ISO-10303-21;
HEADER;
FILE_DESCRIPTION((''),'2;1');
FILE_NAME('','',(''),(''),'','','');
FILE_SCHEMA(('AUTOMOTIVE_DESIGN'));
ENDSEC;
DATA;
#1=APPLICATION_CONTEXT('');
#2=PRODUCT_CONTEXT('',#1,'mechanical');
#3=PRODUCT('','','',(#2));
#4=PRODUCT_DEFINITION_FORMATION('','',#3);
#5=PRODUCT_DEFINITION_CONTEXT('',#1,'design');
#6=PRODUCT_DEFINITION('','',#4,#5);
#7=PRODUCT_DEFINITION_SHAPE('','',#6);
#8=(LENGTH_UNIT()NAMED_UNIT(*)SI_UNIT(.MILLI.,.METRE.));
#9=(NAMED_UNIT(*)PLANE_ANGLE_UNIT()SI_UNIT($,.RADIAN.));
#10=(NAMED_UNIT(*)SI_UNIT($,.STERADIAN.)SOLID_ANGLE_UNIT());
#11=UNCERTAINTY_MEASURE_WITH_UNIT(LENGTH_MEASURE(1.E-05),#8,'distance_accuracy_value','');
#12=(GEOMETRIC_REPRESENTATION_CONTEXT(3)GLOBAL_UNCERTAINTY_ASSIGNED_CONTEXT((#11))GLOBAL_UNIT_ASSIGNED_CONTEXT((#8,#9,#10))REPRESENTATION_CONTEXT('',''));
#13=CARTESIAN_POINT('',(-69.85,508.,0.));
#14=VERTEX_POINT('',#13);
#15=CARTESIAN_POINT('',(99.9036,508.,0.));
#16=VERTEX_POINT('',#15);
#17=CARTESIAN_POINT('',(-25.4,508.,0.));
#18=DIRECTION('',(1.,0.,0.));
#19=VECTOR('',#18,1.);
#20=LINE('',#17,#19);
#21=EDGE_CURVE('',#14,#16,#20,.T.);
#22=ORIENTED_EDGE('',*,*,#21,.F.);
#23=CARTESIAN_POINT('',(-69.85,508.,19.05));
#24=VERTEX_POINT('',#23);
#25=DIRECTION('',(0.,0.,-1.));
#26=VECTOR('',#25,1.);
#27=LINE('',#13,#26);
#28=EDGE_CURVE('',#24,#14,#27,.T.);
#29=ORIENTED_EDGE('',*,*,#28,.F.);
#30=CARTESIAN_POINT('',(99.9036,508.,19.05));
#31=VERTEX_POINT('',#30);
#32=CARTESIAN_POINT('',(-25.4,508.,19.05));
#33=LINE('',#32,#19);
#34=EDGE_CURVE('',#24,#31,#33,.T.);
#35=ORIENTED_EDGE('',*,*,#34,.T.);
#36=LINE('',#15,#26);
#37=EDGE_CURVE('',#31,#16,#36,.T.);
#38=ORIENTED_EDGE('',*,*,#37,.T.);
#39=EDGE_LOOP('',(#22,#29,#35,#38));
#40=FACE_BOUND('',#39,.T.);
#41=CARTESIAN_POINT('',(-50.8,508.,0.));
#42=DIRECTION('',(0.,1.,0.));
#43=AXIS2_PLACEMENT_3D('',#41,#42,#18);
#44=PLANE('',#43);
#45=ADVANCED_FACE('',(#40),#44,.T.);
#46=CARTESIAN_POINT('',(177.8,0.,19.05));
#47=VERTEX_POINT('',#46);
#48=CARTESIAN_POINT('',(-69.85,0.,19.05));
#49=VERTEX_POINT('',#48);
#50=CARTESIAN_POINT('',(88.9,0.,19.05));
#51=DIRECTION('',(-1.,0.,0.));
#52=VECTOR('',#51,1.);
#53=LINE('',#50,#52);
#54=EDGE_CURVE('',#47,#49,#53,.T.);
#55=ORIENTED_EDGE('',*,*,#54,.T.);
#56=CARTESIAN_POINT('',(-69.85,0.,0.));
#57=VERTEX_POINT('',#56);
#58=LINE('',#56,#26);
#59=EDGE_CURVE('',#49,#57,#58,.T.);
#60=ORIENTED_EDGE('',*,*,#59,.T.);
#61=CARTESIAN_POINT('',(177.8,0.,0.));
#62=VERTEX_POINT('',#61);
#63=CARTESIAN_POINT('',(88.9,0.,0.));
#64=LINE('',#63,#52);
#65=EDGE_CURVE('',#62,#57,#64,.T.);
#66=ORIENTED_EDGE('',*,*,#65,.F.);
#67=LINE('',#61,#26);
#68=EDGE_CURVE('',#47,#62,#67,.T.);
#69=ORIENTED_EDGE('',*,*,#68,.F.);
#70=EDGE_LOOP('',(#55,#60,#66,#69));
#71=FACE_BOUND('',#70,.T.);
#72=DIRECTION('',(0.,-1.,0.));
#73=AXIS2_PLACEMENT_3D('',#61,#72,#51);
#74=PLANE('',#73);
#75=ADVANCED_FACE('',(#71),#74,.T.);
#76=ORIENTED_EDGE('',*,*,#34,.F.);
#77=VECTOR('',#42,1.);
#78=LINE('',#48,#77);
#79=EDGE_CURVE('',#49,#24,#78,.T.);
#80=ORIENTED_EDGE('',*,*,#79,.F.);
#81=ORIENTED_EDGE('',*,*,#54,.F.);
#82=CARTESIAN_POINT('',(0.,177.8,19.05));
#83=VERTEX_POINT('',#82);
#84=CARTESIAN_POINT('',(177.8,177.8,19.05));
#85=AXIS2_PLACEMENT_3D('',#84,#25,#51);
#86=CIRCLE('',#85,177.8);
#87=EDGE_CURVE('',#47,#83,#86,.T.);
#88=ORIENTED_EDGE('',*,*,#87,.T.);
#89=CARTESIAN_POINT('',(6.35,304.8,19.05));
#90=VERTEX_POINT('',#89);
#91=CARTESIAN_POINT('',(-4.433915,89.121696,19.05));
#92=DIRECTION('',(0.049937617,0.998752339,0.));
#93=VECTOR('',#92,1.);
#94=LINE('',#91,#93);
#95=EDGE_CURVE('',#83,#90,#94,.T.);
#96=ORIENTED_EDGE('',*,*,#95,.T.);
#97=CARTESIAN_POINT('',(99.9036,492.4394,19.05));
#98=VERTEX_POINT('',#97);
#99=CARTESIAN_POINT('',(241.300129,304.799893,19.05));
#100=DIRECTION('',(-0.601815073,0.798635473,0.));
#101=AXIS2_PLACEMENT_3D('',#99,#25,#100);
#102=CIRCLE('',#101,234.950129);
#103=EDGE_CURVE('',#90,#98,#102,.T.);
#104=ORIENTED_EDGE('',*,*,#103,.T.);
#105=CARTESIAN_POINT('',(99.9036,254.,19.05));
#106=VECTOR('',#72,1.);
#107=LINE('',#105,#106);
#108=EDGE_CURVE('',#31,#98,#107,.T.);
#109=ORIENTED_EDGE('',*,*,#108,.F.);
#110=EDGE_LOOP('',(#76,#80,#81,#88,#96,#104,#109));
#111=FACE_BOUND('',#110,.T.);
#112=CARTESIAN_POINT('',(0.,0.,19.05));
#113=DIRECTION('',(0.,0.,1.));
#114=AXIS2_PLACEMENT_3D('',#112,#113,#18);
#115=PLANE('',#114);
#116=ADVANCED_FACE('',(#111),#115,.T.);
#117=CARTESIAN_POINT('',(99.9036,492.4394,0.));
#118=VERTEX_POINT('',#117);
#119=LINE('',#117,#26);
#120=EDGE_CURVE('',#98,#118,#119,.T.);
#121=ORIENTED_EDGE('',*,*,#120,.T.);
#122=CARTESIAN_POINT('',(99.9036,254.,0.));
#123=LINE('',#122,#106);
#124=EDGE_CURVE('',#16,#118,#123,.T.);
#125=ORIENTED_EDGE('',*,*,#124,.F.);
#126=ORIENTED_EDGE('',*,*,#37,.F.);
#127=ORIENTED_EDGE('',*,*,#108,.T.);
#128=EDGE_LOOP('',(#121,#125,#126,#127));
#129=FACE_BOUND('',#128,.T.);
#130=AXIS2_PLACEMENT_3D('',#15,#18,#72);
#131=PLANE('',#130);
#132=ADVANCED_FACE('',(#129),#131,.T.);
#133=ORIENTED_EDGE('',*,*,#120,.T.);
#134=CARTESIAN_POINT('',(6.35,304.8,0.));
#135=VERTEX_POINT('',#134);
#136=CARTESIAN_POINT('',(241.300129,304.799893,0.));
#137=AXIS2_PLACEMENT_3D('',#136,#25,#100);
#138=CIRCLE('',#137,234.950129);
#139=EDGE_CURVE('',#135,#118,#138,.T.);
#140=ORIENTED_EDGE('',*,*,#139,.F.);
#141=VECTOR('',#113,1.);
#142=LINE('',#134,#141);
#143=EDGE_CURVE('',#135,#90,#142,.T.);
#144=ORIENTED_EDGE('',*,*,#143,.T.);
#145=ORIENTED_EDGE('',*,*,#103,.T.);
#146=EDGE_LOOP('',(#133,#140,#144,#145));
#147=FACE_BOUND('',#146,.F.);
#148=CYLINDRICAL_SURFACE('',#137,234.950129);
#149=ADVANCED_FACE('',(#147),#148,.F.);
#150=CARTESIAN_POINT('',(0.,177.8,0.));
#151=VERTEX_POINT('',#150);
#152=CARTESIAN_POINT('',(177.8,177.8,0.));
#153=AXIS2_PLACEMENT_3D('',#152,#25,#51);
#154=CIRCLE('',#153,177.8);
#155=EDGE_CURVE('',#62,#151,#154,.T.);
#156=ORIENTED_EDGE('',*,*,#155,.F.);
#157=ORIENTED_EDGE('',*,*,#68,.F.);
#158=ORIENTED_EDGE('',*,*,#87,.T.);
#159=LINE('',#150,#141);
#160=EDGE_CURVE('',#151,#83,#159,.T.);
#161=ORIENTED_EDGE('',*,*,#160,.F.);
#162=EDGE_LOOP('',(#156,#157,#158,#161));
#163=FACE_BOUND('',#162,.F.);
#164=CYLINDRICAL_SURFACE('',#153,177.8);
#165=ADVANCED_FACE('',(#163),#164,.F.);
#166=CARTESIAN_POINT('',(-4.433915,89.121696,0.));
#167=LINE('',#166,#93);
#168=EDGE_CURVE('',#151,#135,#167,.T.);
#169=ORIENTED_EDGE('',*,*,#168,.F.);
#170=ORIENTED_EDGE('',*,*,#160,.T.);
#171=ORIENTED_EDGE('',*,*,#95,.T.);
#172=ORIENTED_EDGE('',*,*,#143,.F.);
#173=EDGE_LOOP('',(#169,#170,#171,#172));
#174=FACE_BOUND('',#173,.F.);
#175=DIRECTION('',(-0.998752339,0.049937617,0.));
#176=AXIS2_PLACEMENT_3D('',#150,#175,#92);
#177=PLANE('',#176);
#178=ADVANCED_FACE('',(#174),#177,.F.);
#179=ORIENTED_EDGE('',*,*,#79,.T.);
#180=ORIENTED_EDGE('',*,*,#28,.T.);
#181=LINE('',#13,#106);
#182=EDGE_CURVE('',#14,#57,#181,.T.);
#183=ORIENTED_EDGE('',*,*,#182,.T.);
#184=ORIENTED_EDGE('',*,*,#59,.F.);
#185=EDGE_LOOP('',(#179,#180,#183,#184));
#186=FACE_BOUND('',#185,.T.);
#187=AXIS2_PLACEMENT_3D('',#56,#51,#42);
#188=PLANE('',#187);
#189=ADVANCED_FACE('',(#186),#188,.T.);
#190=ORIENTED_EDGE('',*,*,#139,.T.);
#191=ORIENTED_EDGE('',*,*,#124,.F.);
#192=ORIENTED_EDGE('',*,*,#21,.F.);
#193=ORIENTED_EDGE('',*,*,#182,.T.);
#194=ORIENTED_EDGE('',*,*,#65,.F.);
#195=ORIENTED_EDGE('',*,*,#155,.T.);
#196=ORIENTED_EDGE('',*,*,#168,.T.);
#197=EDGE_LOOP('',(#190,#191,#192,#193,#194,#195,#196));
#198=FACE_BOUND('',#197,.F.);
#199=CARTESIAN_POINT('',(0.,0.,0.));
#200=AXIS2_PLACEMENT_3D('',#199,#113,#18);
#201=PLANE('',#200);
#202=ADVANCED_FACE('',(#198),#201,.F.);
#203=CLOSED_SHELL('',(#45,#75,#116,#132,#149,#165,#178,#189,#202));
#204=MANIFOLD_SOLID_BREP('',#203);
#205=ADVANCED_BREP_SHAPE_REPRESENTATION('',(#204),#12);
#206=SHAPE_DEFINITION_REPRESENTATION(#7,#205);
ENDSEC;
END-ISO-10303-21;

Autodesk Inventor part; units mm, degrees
ref_plane "YZ Plane" through (0, 0, 0) normal (1, 0, 0) x (0, 1, 0)
ref_plane "XZ Plane" through (0, 0, 0) normal (0, 1, 0) x (-1, 0, 0)
ref_plane "XY Plane" through (0, 0, 0) normal (0, 0, 1) x (1, 0, 0)
sketch "Sketch1" plane through (0, 0, 0) normal (0, 0, 1) x (1, 0, 0)
  line L0 (0, 0) -> (609.6, 0) construction
  line L1 (609.6, 0) -> (609.6, 209.55)
  line L2 (609.6, 209.55) -> (0, 209.55) construction
  line L3 (0, 209.55) -> (0, 0) construction
  line L4 (0, 0) -> (304.8, 0) construction
  line L5 (304.8, 0) -> (304.8, 165.1) construction
  line L6 (304.8, 165.1) -> (0, 165.1) construction
  line L7 (0, 165.1) -> (0, 0) construction
  line L8 (0, 0) -> (165.1, 0) construction
  line L9 (165.1, 0) -> (165.1, 304.8) construction
  line L10 (165.1, 304.8) -> (0, 304.8) construction
  line L11 (0, 304.8) -> (0, 0) construction
  line L12 (0, 0) -> (177.8, 0) construction
  line L13 (177.8, 0) -> (177.8, 177.8) construction
  line L14 (177.8, 177.8) -> (0, 177.8) construction
  line L15 (0, 177.8) -> (0, 0) construction
  circle A0 centre (177.8, 177.8) radius 12.7
  line L16 (177.8, 177.8) -> (165.1, 177.8)
  line L17 (177.8, 177.8) -> (177.8, 165.1)
  line L18 (177.8, 177.8) -> (168.8197, 168.8197)
  line L19 (177.8, 177.8) -> (190.5, 177.8) construction
  line L20 (168.8197, 168.8197) -> (52.0764, 52.0764) construction
  line L21 (168.8197, 168.8197) -> (333.9197, 168.8197) construction
  line L22 (177.8, 165.1) -> (177.8, 0) construction
  line L23 (165.1, 177.8) -> (0, 177.8) construction
  arc A1 (0, 177.8) -> (177.8, 0) centre (177.8, 177.8) ccw
  line L24 (177.8, 177.8) -> (355.6, 177.8) construction
  line L25 (355.6, 177.8) -> (355.6, 193.675)
  line L26 (355.6, 193.675) -> (177.8, 193.675) construction
  line L27 (177.8, 193.675) -> (177.8, 177.8) construction
  circle A2 centre (355.6, 193.675) radius 12.7
  line L28 (355.6, 193.675) -> (482.6, 193.675) construction
  line L29 (482.6, 209.55) -> (355.6, 209.55) construction
  line L30 (355.6, 209.55) -> (355.6, 193.675) construction
  line L31 (177.8, 0) -> (609.6, 0)
  line L32 (177.8, 165.1) -> (355.6, 180.975)
  line L33 (165.1, 177.8) -> (165.1, 304.8) construction
  line L34 (165.1, 304.8) -> (241.3, 304.8) construction
  circle A3 centre (241.3, 304.8) radius 76.2
  circle A4 centre (177.8, 228.6) radius 12.7
  line L35 (177.8, 177.8) -> (177.8, 228.6)
  line L36 (241.3, 304.8) -> (195.4417, 365.656) construction
  line L37 (241.3, 304.8) -> (317.5, 304.8) construction
  line L38 (195.4417, 365.656) -> (354.1917, 365.656) construction
  line L39 (195.4417, 365.656) -> (99.9036, 492.4394) construction
  line L40 (195.4417, 365.656) -> (354.1917, 365.656) construction
  line L41 (165.1, 304.8) -> (0, 304.8) construction
  line L42 (241.3, 304.8) -> (169.6954, 330.8619) construction
  line L43 (241.3, 304.8) -> (317.5, 304.8) construction
  line L44 (169.6954, 330.8619) -> (20.5192, 385.1576) construction
  line L45 (177.8, 0) -> (408.0964, 0) construction
  line L46 (241.3, 304.8) -> (317.5, 304.8) construction
  line L47 (241.3, 304.8) -> (175.3089, 342.9) construction
  line L48 (241.3, 304.8) -> (317.5, 304.8) construction
  line L49 (175.3089, 342.9) -> (37.8273, 422.275) construction
  line L50 (190.5, 177.8) -> (393.7, 177.8) construction
  line L51 (609.6, 0) -> (-50.8, 0)
  line L52 (-50.8, 0) -> (-50.8, 508)
  line L53 (177.8, 0) -> (-50.8, 0)
  line L54 (-50.8, 492.4394) -> (-50.8, 508)
  line L55 (-50.8, 508) -> (99.9036, 508)
  line L56 (99.9036, 508) -> (99.9036, 492.4394)
  line L57 (355.6, 180.975) -> (609.6, 209.55)
  arc A5 (99.9036, 492.4394) -> (6.35, 304.8) centre (241.3, 304.8) ccw
  line L58 (0, 177.8) -> (6.35, 304.8)
  line L59 (0, 304.8) -> (0, 177.8) construction
  line L60 (6.35, 304.8) -> (0, 304.8) construction
  point P0 (165.2751, 230.7014)
  point P1 (172.7151, 216.9624)
  dimension "d16" = 25.4
  dimension "d0" = 609.6
  dimension "d1" = 209.55
  dimension "d2" = 304.8
  dimension "d3" = 165.1
  dimension "d4" = 165.1
  dimension "d5" = 304.8
  dimension "d6" = 177.8
  dimension "d7" = 177.8
  dimension "d8" = 25.4
  dimension "d9" = 12.7
  dimension "d10" = 135
  dimension "d11" = 165.1
  dimension "d12" = 135
  dimension "d13" = 165.1
  dimension "d14" = 177.8
  dimension "d15" = 15.875
  dimension "d17" = 127
  dimension "d20" = 127
  dimension "d21" = 76.2
  dimension "d22" = 152.4
  dimension "d23" = 25.4
  dimension "d24" = 50.8
  dimension "d26" = 127
  dimension "d33" = 158.75
  dimension "d34" = 127
  dimension "d35" = 160
  dimension "d36" = 158.75
  dimension "d37" = 180
  dimension "d45" = 150
  dimension "d46" = 158.75
  dimension "d47" = 180
  dimension "d72" = 660.4
  dimension "d73" = 508
  dimension "d74" = 90
  dimension "d77" = 150.7036
  dimension "d78" = 15.5606
extrude "Extrusion2" add sketch "Sketch1" along normal blind 19.05 contours A1 L51 L52 L55 L56 A5 L58
move faces "Move1" translate (-19.05, 0, 0) faces at (-50.8, 338.6667, 6.35)
